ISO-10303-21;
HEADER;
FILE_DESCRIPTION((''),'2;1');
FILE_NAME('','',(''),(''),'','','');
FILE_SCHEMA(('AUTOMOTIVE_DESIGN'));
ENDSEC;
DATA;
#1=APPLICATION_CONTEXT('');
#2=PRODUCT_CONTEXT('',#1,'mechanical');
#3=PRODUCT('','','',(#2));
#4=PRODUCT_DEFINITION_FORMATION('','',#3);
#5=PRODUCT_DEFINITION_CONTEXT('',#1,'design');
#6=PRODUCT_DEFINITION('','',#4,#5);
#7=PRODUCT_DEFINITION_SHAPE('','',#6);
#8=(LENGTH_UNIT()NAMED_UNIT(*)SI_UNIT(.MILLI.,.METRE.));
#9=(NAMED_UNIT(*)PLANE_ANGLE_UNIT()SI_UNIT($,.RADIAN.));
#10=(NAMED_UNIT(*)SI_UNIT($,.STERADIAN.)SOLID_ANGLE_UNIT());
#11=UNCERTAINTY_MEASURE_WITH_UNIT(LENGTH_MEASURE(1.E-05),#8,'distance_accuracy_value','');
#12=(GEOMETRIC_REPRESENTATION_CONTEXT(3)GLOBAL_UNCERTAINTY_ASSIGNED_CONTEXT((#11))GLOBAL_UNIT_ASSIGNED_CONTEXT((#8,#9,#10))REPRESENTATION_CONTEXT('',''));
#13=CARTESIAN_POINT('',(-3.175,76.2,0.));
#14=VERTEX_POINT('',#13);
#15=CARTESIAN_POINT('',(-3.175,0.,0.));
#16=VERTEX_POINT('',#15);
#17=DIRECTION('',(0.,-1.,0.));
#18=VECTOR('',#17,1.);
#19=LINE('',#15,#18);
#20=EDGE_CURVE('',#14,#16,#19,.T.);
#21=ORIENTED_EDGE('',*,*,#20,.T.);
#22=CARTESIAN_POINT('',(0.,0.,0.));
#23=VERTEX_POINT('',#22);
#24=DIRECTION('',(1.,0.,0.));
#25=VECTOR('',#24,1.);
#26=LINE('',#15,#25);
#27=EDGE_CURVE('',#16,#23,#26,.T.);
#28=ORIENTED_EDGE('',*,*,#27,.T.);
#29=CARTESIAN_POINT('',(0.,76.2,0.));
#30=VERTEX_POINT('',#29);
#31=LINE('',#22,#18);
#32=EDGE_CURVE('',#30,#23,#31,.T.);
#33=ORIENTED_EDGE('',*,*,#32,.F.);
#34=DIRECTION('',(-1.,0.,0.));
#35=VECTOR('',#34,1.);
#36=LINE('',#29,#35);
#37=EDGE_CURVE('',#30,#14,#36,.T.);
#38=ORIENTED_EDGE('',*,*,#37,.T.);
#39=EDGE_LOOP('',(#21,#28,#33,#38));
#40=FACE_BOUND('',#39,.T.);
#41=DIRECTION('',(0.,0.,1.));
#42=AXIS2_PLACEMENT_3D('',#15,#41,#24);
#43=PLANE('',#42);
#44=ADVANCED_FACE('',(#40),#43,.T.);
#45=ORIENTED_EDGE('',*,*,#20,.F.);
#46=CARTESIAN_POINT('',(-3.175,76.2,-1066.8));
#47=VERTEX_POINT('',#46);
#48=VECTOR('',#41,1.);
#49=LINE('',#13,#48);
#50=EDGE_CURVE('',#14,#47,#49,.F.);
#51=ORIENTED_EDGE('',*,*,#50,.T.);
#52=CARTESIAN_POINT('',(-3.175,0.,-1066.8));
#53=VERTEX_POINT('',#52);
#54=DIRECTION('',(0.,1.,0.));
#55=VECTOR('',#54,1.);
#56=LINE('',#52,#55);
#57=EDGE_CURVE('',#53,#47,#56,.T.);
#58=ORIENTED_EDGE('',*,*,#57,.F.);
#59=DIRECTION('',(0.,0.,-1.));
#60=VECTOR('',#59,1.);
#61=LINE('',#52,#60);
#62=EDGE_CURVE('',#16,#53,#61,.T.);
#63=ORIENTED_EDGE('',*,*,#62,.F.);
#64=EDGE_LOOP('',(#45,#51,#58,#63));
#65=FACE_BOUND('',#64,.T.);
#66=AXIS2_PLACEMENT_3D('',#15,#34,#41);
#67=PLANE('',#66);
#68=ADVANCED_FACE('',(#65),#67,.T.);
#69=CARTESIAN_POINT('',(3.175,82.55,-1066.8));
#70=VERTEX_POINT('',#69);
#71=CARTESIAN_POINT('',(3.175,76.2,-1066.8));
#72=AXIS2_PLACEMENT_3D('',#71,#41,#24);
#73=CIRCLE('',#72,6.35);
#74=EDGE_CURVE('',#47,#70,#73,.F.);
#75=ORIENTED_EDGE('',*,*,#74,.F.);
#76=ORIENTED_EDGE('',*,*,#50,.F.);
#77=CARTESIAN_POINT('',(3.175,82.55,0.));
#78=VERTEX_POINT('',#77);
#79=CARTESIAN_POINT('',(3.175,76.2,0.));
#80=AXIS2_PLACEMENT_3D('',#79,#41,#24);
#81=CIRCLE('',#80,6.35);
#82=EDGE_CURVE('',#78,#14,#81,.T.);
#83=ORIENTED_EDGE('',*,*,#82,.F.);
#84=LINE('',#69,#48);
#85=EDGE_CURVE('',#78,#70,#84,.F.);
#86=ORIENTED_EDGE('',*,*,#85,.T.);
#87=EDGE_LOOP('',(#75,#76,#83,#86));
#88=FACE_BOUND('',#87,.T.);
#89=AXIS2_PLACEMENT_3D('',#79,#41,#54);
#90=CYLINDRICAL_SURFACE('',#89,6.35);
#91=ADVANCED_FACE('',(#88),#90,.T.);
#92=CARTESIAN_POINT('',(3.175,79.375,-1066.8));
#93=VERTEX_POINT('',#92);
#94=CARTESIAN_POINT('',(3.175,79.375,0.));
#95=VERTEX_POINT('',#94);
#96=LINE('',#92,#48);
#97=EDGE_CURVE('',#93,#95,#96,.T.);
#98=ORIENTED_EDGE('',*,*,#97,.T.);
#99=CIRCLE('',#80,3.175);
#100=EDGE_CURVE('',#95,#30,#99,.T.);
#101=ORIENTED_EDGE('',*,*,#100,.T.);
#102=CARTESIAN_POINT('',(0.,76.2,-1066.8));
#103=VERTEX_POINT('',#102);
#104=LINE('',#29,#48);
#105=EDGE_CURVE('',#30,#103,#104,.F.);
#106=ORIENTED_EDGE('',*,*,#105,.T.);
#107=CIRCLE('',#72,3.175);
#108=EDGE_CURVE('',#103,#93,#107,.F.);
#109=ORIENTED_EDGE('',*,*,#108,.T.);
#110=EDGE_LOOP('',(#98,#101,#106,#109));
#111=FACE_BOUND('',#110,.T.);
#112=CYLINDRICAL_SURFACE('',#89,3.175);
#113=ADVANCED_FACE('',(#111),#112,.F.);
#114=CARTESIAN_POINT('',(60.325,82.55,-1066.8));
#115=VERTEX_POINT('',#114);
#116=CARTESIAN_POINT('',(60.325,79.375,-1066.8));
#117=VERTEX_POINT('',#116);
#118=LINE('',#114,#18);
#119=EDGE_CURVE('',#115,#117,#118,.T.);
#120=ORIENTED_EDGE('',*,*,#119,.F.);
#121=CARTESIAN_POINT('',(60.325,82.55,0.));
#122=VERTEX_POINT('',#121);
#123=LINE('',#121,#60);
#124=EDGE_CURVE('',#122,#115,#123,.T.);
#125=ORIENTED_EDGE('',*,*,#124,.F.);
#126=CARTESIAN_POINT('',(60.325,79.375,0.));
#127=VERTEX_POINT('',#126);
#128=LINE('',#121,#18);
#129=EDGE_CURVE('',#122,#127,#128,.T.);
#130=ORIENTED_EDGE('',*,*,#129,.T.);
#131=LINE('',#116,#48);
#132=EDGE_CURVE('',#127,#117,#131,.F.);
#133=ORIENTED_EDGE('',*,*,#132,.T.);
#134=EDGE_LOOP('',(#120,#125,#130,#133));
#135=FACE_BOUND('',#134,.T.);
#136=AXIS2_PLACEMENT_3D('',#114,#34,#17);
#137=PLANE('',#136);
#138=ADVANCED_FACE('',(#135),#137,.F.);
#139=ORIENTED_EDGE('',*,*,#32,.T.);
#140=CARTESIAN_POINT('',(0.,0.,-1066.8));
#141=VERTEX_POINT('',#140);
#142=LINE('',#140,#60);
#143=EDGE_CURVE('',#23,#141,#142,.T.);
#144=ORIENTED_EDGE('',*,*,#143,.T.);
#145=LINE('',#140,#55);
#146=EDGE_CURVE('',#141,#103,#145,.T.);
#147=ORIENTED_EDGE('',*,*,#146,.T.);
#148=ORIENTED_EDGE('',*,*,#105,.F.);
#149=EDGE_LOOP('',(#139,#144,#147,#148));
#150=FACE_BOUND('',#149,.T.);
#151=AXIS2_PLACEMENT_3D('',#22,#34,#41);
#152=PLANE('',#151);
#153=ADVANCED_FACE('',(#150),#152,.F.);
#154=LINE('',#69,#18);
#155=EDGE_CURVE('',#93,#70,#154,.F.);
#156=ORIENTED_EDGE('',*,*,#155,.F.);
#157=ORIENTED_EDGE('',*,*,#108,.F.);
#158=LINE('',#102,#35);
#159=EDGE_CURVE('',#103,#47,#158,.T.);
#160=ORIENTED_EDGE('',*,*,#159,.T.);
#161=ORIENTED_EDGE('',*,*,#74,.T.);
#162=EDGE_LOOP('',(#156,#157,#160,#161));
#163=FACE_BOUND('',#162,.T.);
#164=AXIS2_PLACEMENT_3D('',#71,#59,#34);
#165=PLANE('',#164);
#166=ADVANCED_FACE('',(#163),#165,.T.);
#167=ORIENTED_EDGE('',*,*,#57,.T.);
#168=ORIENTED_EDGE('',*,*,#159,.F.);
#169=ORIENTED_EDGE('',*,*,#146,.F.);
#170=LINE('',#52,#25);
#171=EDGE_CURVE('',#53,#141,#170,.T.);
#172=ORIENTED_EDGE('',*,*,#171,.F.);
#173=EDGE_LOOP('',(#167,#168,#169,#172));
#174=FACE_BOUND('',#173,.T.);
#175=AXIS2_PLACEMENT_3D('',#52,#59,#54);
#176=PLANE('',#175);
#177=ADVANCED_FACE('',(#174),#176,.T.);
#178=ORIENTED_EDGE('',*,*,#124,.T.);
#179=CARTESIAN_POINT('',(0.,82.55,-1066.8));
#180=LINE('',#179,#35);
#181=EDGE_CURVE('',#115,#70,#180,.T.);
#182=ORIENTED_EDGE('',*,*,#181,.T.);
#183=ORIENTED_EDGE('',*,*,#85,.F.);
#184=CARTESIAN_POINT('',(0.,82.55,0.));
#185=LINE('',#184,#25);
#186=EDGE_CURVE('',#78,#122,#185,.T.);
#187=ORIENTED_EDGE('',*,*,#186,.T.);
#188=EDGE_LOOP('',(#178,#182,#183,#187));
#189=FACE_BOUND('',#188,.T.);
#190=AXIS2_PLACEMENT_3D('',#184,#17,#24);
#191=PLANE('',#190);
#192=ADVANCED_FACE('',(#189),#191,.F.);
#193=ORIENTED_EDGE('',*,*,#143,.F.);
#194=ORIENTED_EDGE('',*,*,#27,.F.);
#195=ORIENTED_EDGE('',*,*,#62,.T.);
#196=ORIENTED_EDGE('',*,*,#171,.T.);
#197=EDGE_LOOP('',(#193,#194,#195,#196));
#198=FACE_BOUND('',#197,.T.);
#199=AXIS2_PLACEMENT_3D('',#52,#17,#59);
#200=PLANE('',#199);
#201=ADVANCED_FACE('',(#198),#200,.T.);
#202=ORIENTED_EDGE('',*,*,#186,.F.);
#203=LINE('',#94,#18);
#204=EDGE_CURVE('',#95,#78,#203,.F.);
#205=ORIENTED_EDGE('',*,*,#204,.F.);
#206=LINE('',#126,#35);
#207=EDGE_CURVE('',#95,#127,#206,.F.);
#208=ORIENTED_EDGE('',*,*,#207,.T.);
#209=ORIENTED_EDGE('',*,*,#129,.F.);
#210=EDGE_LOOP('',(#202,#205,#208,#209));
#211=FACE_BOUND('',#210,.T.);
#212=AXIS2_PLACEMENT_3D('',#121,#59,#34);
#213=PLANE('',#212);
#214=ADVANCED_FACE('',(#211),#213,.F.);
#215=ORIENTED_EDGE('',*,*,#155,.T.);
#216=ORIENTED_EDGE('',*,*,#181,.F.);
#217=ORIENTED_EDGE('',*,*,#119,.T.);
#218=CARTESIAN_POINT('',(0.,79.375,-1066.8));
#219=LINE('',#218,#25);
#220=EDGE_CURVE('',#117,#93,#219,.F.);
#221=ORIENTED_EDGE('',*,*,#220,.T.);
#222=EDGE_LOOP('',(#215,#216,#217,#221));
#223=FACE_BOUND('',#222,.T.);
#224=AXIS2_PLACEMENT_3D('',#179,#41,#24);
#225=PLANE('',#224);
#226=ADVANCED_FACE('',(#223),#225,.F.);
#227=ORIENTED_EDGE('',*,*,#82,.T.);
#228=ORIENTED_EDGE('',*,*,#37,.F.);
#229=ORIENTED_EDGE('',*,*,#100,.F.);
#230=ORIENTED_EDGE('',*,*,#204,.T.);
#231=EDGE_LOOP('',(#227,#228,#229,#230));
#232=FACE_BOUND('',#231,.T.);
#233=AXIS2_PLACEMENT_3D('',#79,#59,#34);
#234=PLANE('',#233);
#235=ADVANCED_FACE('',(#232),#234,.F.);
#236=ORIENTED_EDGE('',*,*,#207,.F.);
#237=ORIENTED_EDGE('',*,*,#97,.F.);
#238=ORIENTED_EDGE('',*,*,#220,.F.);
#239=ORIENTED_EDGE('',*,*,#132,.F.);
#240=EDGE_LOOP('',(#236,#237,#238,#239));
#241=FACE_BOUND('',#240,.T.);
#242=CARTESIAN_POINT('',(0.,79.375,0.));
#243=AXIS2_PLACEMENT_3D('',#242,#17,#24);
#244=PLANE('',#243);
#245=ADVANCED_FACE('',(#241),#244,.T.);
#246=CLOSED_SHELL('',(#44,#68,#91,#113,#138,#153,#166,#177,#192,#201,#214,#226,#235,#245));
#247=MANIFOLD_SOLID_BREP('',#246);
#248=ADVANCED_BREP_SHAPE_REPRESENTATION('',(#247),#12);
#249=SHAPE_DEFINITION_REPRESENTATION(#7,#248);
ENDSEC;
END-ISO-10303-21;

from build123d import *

# Parameters (mm, degrees)
SKETCH1_W                    = 1066.8
SKETCH1_H                    = 82.55
BASE_FLANGE1_DEPTH           = 3.175
EDGE_FLANGE1_STRIP_W         = 19.05
EDGE_FLANGE1_STRIP_H         = 3.175
EDGE_FLANGE1_STRIP_CUT_DEPTH = 1066.8
EDGE_FLANGE1_DEPTH           = 1066.8


# Sheet-metal steps are written as plain solids
with BuildPart() as part:
    # Sketch1 → Base-Flange1 (new body)
    with BuildSketch(Plane(origin=(0, 0, 0), x_dir=(0, 0, -1), z_dir=(1, 0, 0))):
        with Locations((533.4, 41.275)):
            Rectangle(SKETCH1_W, SKETCH1_H)
    extrude(amount=-BASE_FLANGE1_DEPTH)

    # Edge-Flange1 strip (across the edge) → Edge-Flange1 strip cut (cut)
    with BuildSketch(Plane(origin=(0, 82.55, -1066.8), x_dir=(0, -1, 0), z_dir=(0, 0, 1))):
        with Locations((-3.175, -1.5875)):
            Rectangle(EDGE_FLANGE1_STRIP_W, EDGE_FLANGE1_STRIP_H)
    extrude(amount=EDGE_FLANGE1_STRIP_CUT_DEPTH, mode=Mode.SUBTRACT)

    # Edge-Flange1 section (across the edge) → Edge-Flange1 (add)
    with BuildSketch(Plane(origin=(0, 82.55, -1066.8), x_dir=(0, -1, 0), z_dir=(0, 0, 1))):
        with BuildLine():
            Line((0, 3.175), (0, 60.325))
            Line((0, 60.325), (3.175, 60.325))
            Line((3.175, 60.325), (3.175, 3.175))
            ThreePointArc((3.175, 3.175), (4.10493597, 0.92993597), (6.35, 0))
            Line((6.35, 0), (6.35, -3.175))
            ThreePointArc((6.35, -3.175), (1.859871939, -1.315128061), (0, 3.175))
        make_face()
    extrude(amount=EDGE_FLANGE1_DEPTH)


solid = part.part
